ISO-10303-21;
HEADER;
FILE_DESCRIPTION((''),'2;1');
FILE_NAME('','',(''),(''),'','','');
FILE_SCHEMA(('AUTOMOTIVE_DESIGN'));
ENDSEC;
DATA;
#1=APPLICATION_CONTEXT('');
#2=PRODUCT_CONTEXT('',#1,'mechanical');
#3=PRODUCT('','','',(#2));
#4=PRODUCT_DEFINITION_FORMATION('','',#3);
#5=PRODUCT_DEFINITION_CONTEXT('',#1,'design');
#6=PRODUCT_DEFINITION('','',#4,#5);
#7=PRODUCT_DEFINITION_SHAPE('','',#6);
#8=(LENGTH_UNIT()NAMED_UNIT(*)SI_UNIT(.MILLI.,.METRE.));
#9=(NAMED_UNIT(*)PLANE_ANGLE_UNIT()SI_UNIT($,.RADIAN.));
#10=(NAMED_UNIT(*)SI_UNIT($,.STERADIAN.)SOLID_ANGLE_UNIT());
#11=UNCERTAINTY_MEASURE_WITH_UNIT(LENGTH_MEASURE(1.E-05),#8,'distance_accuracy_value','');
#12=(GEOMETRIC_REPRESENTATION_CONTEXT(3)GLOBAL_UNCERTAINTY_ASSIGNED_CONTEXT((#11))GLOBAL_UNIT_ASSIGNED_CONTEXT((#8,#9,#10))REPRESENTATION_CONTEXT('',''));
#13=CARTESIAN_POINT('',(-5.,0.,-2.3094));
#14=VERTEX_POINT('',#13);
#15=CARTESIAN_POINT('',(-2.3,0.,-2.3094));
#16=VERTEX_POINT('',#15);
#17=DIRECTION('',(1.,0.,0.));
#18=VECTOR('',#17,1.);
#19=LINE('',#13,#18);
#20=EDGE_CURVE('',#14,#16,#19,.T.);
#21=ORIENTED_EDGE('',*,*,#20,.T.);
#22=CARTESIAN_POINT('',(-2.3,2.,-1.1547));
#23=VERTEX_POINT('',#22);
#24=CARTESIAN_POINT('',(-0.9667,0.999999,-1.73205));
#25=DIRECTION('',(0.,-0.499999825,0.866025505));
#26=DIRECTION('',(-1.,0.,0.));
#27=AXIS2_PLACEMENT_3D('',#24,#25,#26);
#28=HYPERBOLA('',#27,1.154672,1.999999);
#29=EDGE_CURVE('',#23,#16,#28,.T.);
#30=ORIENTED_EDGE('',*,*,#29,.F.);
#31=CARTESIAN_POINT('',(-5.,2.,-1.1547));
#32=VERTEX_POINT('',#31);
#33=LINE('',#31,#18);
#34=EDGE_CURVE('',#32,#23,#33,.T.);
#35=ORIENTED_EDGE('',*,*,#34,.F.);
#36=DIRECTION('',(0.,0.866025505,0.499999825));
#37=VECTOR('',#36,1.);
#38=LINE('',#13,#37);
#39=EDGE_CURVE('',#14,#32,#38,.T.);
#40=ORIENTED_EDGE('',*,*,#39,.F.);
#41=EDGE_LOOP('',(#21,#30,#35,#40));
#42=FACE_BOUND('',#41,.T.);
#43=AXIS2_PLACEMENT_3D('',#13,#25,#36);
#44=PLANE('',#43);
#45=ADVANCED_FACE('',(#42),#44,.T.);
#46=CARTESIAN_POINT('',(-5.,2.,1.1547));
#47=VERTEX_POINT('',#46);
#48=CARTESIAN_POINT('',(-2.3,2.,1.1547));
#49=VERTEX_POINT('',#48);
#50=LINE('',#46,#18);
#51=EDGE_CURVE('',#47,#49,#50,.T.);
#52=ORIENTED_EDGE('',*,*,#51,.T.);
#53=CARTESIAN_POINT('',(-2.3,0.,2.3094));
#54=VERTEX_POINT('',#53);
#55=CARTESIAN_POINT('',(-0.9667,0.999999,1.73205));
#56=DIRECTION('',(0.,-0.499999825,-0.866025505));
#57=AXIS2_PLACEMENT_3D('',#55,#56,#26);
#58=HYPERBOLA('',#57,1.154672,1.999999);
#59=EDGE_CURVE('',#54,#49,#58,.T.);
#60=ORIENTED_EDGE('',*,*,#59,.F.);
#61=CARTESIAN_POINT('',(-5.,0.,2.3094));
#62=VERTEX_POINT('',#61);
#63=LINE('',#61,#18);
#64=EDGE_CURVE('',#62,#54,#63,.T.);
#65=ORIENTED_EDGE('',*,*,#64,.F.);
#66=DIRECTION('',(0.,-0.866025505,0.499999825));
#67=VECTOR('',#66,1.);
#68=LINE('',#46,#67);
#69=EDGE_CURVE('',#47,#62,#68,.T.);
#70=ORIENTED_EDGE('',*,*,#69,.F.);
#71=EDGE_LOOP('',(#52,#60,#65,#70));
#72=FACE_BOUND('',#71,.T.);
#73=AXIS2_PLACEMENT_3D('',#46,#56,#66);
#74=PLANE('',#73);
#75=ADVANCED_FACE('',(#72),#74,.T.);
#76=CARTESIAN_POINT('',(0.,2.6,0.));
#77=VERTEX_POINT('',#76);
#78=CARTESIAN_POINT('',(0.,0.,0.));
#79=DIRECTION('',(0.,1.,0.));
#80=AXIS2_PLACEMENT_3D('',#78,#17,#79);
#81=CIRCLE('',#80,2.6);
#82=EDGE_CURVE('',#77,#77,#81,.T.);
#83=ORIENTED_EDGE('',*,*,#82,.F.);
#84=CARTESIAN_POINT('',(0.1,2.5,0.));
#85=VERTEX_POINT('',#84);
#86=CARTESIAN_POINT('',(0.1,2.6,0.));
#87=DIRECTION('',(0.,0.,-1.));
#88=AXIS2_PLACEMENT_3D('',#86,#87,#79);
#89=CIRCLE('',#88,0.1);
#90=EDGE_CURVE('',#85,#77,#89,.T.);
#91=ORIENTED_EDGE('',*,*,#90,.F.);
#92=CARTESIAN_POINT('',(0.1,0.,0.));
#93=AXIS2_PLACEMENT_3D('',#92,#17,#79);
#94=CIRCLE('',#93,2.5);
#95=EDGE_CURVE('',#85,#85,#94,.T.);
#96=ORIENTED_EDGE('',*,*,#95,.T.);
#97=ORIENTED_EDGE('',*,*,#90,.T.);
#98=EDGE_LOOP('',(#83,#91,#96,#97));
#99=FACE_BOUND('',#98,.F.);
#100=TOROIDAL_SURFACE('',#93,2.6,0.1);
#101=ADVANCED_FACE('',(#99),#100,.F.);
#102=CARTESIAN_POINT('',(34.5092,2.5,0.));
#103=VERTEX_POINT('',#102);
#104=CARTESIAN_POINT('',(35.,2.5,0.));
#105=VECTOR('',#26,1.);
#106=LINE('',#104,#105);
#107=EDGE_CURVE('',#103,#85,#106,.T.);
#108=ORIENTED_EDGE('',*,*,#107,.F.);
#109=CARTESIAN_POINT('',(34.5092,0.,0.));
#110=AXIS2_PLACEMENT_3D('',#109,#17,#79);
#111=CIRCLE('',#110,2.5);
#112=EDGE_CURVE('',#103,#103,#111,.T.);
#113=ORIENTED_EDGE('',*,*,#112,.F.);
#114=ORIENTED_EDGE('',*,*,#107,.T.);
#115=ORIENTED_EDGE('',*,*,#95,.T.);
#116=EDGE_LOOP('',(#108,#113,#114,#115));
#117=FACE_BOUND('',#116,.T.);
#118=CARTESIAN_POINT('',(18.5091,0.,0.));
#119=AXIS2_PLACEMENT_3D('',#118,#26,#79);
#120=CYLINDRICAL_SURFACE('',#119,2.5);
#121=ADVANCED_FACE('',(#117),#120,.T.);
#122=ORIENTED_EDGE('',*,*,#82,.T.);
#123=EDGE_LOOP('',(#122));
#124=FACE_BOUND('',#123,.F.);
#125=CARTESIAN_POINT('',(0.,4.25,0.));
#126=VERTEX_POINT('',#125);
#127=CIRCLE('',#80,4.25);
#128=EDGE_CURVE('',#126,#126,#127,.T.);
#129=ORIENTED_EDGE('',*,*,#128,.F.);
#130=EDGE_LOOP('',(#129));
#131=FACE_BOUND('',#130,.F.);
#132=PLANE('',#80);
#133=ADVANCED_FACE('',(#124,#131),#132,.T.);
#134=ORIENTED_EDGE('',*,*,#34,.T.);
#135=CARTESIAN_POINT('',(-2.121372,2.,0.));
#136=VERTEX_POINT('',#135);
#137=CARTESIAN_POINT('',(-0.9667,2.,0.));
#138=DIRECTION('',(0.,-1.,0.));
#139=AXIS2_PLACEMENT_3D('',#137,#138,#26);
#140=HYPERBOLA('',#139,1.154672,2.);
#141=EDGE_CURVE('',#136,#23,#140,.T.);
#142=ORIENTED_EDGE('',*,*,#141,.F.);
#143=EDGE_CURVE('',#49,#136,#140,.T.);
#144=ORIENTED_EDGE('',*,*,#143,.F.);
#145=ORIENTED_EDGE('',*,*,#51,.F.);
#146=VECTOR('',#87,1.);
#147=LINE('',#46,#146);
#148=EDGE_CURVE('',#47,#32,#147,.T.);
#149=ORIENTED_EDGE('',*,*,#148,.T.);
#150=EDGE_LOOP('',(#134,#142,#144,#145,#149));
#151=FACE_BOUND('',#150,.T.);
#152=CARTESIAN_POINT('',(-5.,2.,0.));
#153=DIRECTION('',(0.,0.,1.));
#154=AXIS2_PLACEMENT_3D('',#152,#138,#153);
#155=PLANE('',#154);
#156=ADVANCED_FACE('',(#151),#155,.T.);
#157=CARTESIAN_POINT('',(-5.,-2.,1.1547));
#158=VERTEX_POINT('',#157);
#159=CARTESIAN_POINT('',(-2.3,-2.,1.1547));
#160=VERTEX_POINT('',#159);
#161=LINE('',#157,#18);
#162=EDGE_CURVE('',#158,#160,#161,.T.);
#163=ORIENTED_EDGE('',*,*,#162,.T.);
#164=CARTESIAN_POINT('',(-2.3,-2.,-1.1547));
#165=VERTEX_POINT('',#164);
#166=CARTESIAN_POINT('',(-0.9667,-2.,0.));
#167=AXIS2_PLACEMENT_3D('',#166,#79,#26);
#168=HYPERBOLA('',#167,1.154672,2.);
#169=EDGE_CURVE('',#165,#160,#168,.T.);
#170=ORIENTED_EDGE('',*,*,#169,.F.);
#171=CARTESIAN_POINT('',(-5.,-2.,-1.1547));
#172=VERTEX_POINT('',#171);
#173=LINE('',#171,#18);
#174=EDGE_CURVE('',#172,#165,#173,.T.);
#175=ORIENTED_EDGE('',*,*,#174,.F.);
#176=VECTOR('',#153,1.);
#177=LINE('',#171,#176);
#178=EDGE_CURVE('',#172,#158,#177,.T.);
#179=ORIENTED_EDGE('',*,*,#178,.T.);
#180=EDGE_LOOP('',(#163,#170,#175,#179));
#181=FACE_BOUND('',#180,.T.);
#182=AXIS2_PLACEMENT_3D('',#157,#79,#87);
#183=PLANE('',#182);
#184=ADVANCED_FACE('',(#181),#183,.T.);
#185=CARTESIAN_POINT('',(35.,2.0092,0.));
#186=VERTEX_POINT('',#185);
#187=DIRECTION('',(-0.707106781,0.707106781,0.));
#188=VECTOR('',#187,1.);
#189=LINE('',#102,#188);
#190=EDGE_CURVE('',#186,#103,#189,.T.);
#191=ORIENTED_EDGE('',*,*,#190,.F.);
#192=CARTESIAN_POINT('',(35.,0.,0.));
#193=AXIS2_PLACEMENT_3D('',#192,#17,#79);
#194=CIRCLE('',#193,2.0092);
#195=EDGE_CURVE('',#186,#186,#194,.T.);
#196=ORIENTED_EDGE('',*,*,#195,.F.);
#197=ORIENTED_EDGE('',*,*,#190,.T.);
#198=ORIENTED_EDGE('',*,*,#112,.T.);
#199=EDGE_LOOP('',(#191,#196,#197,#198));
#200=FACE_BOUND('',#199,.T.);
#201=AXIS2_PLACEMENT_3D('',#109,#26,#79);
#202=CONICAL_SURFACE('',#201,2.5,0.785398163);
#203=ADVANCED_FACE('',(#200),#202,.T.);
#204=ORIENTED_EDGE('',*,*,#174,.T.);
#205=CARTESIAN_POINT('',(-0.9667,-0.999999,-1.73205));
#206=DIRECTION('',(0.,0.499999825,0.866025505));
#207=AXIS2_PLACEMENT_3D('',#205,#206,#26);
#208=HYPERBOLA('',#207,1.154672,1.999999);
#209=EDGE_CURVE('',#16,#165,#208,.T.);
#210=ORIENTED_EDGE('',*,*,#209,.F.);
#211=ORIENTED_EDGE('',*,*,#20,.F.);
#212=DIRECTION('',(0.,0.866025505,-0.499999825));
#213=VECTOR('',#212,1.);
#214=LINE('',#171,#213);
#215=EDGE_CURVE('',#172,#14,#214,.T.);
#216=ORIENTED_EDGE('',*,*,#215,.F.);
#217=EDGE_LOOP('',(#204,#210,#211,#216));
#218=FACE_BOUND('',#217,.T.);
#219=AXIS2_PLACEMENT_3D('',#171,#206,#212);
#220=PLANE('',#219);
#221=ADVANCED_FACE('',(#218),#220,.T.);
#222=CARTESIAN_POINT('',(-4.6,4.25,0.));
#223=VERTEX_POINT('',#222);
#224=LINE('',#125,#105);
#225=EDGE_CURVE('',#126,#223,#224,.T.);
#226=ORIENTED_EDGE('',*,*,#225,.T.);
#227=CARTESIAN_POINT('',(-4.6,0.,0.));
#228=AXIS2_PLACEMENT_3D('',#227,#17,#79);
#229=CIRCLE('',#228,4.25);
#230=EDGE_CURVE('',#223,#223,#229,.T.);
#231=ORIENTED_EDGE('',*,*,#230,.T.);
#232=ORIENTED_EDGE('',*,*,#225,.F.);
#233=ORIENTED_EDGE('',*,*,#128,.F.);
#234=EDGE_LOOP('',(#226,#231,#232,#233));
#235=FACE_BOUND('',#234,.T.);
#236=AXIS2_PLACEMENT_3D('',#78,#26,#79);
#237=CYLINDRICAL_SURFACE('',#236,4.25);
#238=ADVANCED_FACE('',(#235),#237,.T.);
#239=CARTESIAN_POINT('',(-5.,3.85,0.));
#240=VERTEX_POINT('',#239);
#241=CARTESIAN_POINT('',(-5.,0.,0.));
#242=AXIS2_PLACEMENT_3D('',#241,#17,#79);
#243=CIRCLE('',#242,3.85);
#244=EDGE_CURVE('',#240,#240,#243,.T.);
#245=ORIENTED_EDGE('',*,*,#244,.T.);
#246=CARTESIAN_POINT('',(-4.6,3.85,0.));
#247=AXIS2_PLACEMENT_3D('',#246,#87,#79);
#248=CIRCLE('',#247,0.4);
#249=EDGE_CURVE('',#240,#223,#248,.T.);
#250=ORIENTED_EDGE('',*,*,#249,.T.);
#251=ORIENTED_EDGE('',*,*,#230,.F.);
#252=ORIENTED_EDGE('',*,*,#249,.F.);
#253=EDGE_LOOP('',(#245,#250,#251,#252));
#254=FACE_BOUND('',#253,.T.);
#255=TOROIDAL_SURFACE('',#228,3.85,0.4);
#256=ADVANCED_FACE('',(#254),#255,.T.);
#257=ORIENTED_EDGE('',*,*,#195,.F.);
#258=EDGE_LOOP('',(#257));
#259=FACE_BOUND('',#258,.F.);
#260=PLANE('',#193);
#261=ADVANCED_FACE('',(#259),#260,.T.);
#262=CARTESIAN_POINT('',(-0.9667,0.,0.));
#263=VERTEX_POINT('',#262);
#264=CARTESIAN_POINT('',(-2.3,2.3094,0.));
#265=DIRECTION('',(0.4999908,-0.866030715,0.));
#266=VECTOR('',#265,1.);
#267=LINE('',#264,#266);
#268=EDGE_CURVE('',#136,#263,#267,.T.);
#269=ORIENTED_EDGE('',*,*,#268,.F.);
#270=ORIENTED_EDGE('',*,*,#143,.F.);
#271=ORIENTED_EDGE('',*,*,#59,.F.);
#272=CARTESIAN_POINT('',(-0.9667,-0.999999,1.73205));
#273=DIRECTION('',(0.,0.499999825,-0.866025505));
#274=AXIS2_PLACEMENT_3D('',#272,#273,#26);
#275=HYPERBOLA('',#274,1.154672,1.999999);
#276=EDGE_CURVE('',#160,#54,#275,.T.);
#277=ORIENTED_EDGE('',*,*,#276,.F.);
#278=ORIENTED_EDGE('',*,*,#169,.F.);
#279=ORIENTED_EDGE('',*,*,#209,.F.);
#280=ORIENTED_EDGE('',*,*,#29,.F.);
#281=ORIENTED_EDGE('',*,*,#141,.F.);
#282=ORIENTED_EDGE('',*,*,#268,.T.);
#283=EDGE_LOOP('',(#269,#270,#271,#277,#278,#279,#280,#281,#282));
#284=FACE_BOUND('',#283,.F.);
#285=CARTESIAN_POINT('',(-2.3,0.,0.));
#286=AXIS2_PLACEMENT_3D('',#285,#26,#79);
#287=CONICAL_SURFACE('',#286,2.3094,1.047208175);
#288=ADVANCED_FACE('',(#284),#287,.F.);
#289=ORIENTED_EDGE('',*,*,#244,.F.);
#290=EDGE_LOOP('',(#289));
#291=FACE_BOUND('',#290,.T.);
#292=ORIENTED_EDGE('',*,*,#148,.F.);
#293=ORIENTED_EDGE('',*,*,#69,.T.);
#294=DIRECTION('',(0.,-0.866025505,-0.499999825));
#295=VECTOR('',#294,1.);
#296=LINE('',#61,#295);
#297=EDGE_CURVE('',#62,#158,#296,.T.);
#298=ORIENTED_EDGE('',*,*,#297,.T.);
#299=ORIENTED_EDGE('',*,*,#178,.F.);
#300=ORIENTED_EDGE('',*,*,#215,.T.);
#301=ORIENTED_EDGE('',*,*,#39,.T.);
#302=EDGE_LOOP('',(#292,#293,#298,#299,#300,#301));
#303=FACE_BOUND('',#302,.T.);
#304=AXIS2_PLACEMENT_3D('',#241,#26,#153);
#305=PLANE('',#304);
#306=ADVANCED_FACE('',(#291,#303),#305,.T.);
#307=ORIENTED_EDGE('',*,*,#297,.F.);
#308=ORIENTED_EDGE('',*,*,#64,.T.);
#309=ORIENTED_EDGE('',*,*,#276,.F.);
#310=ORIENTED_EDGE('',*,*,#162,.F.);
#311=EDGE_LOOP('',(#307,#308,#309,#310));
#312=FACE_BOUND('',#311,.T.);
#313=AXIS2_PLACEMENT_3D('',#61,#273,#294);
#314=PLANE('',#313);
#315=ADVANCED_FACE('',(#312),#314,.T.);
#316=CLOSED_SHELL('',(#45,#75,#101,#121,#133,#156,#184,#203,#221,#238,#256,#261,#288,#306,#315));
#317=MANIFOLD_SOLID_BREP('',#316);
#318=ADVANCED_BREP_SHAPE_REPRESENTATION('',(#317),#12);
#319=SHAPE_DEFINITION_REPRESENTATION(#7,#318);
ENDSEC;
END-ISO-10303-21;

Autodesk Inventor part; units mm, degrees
ref_plane "YZ Plane" through (0, 0, 0) normal (1, 0, 0) x (0, 1, 0)
ref_plane "XZ Plane" through (0, 0, 0) normal (0, 1, 0) x (-1, 0, 0)
sketch "Sketch1" plane through (0, 0, 0) normal (0, 0, 1) x (1, 0, 0)
  line L0 (-0.9667, 0) -> (35, 0)
  line L1 (35, 0) -> (35, 2.5)
  line L2 (35, 2.5) -> (19, 2.5)
  line L3 (19, 2.5) -> (18.5091, 2.5)
  line L4 (18.5091, 2.5) -> (0, 2.5)
  line L5 (0, 2.5) -> (0, 4.25)
  line L6 (0, 4.25) -> (-5, 4.25)
  line L7 (-5, 4.25) -> (-5, 2.3094)
  line L8 (-5, 2.3094) -> (-2.3, 2.3094)
  line L9 (-2.3, 2.3094) -> (-0.9667, 0)
  line L10 (-13, 0) -> (43, 0) projected
  line L11 (0, -0.85) -> (0, 5.1) projected
  line L12 (19, 2.5) -> (0, 2.5) construction
  dimension "d1" = 16
  dimension "d2" = 0.4909
  dimension "d3" = 5
  dimension "d4" = 2.7
  dimension "d5" = 60
  dimension "d6" = 5
  dimension "d7" = 5
  dimension "d8" = 4.6188
  dimension "d9" = 8.5
  dimension "d26" = 35
revolve "Body" add sketch "Sketch1" angle 360 about axis through (-0.9667, 0, 0) along (1, 0, 0)
sketch "Sketch2" plane through (-5, 0, 0) normal (-1, 0, 0) x (0, 0, 1)
  circle A0 centre (0, 0) radius 2.3094 projected
  line L0 (0, -5.95) -> (0, 5.95) projected
  line L1 (-5.95, 0) -> (5.95, 0) projected
  line L2 (2.3094, 0) -> (1.1547, -2)
  line L3 (1.1547, -2) -> (-1.1547, -2)
  line L4 (-1.1547, -2) -> (-2.3094, 0)
  line L5 (-2.3094, 0) -> (-1.1547, 2)
  line L6 (-1.1547, 2) -> (1.1547, 2)
  line L7 (1.1547, 2) -> (2.3094, 0)
extrude "Slot" add sketch "Sketch2" against normal up to next contours L7 A0 | A0 L2 | L6 L0 A0 | A0 L0 L3 | L0 L6 A0 | A0 L3 L0 | L4 A0 | A0 L5
fillet "Fillet1" radius 0.4 1 edges at (-5, -4.25, 0)
thread "Thread" size "M5x0.8" class "6g" standard "ISO Metric profile" length 16
chamfer "Chamfer1" distance 0.4908 distance2 0.4908 1 edges at (35, -2.5, 0) measured on face at (35, -0.7192, 0.1653)
ref_plane "Work Plane1" through (29, 0, 0) normal (0, -1, 0) x (1, 0, 0)
fillet "Fillet2" radius 0.1 1 edges at (0, -2.5, 0)
equation "\"d30\" = R"
equation "\"d17\" = RR"
equation "\"d13\" = GEL"
equation "\"d15\" = -0.5 * SPD + 0.5 * GD"
equation "\"d16\" = GUL"
equation "\"d1\" = GEL"
equation "\"d3\" = KOH"
equation "\"d4\" = INTI"
equation "\"d6\" = GD"
equation "\"d7\" = BDM"
equation "\"d8\" = 1.1547 * SW"
equation "\"d9\" = KOD"
equation "\"d26\" = NLG"
equation "\"GD\" = NND"
equation "\"NLG\" = 35"
equation "\"GEL\" = 16"
equation "\"KOD\" = 8.5"
equation "\"KOH\" = NND"
equation "\"INTI\" = 2.7"
equation "\"GAL\" = 0.61345 * PTC"
equation "\"GUL\" = 0.61345 * PTC"
equation "\"BDM\" = NND"
equation "\"SW\" = 4"
equation "\"RR\" = 0.4"
equation "\"SPD\" = NND - 1.2269 * PTC"
equation "\"R\" = 0.1"
equation "\"TOA\" = 30deg"
equation "\"GD1\" = THREADDIA - 1.2269 * PTC"
equation "\"THREADDIA\" = 5"
equation "\"FAWI\" = 45deg"
equation "\"PTC\" = 0.8"
equation "\"NND\" = 5"
equation "\"E0\" = 1.155 * SW"
equation "\"PHH\" = 0"
properties part number "CSN 02 1143 - M5 x 35" material "Steel, Mild"
